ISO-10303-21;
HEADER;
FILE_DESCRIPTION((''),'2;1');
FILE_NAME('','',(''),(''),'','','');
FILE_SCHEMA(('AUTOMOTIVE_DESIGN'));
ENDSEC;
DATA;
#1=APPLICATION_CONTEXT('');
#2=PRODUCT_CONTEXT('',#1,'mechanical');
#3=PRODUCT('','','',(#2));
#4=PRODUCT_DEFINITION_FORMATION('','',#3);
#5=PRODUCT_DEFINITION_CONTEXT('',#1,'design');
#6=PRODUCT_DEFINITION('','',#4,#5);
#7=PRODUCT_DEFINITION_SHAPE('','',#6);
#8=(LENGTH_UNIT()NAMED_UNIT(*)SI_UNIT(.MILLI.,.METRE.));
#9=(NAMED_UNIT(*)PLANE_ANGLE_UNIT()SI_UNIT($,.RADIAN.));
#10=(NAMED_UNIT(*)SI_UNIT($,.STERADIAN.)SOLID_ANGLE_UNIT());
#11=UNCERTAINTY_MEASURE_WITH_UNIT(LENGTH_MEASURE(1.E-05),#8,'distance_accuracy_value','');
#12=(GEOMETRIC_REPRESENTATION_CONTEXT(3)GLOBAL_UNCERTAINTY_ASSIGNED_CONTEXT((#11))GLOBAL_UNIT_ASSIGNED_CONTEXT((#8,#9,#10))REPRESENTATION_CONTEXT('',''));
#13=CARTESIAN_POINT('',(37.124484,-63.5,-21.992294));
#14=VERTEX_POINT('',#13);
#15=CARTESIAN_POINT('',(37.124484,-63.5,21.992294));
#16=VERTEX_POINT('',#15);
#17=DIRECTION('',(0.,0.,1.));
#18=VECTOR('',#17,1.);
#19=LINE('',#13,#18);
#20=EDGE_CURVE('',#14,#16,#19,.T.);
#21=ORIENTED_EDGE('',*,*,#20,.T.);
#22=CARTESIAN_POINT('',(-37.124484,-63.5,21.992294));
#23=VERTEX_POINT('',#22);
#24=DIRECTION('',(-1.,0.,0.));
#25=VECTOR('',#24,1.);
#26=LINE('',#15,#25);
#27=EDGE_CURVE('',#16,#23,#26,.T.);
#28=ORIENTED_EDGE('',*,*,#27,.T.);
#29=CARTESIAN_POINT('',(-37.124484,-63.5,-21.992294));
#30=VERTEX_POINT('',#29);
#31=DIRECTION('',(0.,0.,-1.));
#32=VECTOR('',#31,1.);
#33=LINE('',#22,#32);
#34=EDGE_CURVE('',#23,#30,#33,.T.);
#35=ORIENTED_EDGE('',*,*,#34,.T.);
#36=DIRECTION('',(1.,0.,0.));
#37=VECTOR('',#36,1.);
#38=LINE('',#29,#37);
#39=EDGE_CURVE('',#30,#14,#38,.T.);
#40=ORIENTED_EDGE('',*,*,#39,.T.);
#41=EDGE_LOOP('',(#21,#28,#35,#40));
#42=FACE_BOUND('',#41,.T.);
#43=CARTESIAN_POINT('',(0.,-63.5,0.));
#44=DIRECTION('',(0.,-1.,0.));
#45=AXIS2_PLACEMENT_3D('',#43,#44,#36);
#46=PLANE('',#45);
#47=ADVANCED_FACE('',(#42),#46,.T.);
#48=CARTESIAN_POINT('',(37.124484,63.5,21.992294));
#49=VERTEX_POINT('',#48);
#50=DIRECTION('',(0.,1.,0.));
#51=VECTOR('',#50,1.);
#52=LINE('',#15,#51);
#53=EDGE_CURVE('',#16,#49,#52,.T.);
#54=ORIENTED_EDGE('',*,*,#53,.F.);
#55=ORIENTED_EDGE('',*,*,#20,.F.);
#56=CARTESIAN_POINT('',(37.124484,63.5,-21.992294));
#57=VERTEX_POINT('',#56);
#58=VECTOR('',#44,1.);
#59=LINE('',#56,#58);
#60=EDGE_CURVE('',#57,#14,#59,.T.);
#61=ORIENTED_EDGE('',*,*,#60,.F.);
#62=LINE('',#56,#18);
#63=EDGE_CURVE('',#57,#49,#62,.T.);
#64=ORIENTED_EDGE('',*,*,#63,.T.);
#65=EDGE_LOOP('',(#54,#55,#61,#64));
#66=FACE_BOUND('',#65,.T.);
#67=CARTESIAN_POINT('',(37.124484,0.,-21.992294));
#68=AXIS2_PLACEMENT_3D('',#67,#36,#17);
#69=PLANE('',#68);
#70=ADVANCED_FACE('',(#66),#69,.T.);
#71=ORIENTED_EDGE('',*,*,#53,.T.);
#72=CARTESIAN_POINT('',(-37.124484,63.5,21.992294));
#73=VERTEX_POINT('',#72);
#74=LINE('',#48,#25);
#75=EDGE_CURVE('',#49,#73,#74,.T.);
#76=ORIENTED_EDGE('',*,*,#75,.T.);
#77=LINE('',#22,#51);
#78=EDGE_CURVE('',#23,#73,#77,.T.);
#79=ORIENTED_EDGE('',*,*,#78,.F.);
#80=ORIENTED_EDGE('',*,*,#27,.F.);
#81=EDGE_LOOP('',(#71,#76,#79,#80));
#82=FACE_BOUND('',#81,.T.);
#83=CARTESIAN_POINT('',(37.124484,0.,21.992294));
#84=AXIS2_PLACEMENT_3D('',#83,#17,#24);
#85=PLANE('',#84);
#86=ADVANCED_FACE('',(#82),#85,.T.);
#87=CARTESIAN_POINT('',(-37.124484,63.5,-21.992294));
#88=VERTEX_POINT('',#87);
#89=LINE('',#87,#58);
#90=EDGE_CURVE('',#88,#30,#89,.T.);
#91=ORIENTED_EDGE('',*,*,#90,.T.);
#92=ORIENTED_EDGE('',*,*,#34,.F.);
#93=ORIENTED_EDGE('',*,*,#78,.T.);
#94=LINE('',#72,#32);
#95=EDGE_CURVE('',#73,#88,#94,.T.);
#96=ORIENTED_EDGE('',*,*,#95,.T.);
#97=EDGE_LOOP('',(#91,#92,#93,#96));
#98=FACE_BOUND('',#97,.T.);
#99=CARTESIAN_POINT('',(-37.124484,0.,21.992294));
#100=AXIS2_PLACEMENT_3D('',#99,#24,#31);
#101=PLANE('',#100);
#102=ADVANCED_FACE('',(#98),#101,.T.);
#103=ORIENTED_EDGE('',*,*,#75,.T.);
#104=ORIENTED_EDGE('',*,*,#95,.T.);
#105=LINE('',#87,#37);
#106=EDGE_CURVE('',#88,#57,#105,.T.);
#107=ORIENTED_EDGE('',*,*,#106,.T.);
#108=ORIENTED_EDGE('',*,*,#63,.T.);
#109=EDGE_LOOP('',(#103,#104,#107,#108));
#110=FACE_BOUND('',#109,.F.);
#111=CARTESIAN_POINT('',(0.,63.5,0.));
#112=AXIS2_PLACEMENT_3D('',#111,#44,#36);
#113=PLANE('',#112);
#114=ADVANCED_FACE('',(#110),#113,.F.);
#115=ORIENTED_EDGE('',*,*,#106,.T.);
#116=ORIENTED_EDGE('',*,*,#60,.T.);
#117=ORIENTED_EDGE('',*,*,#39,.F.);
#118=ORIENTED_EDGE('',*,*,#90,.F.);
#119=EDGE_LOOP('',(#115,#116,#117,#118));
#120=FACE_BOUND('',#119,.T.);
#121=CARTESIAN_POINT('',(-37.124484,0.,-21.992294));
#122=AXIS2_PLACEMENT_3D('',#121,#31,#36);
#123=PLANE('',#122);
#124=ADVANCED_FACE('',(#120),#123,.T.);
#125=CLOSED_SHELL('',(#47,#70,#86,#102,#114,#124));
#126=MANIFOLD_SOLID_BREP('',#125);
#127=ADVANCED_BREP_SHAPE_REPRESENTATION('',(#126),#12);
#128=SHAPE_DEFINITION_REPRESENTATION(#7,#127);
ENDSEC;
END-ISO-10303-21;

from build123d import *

# Parameters (mm, degrees)
F1_DEPTH = 63.5


# Not quite as in the source:
# - the program builds the solid bodies; features that only make, move or delete a surface that nothing else refers to are left out


with BuildPart() as f1:
    # F0 (on Front) → F1 (new body, symmetric)
    with BuildSketch(Plane.XZ):
        Polygon((-37.124483712, 21.9922941178), (-37.124483712, -21.9922941178), (37.124483712, -21.9922941178), (37.124483712, 21.9922941178), (0, 21.9922941178), (-11.9380000979, 21.9922941178), align=None)
    extrude(amount=F1_DEPTH, both=True)


solid = f1.part
